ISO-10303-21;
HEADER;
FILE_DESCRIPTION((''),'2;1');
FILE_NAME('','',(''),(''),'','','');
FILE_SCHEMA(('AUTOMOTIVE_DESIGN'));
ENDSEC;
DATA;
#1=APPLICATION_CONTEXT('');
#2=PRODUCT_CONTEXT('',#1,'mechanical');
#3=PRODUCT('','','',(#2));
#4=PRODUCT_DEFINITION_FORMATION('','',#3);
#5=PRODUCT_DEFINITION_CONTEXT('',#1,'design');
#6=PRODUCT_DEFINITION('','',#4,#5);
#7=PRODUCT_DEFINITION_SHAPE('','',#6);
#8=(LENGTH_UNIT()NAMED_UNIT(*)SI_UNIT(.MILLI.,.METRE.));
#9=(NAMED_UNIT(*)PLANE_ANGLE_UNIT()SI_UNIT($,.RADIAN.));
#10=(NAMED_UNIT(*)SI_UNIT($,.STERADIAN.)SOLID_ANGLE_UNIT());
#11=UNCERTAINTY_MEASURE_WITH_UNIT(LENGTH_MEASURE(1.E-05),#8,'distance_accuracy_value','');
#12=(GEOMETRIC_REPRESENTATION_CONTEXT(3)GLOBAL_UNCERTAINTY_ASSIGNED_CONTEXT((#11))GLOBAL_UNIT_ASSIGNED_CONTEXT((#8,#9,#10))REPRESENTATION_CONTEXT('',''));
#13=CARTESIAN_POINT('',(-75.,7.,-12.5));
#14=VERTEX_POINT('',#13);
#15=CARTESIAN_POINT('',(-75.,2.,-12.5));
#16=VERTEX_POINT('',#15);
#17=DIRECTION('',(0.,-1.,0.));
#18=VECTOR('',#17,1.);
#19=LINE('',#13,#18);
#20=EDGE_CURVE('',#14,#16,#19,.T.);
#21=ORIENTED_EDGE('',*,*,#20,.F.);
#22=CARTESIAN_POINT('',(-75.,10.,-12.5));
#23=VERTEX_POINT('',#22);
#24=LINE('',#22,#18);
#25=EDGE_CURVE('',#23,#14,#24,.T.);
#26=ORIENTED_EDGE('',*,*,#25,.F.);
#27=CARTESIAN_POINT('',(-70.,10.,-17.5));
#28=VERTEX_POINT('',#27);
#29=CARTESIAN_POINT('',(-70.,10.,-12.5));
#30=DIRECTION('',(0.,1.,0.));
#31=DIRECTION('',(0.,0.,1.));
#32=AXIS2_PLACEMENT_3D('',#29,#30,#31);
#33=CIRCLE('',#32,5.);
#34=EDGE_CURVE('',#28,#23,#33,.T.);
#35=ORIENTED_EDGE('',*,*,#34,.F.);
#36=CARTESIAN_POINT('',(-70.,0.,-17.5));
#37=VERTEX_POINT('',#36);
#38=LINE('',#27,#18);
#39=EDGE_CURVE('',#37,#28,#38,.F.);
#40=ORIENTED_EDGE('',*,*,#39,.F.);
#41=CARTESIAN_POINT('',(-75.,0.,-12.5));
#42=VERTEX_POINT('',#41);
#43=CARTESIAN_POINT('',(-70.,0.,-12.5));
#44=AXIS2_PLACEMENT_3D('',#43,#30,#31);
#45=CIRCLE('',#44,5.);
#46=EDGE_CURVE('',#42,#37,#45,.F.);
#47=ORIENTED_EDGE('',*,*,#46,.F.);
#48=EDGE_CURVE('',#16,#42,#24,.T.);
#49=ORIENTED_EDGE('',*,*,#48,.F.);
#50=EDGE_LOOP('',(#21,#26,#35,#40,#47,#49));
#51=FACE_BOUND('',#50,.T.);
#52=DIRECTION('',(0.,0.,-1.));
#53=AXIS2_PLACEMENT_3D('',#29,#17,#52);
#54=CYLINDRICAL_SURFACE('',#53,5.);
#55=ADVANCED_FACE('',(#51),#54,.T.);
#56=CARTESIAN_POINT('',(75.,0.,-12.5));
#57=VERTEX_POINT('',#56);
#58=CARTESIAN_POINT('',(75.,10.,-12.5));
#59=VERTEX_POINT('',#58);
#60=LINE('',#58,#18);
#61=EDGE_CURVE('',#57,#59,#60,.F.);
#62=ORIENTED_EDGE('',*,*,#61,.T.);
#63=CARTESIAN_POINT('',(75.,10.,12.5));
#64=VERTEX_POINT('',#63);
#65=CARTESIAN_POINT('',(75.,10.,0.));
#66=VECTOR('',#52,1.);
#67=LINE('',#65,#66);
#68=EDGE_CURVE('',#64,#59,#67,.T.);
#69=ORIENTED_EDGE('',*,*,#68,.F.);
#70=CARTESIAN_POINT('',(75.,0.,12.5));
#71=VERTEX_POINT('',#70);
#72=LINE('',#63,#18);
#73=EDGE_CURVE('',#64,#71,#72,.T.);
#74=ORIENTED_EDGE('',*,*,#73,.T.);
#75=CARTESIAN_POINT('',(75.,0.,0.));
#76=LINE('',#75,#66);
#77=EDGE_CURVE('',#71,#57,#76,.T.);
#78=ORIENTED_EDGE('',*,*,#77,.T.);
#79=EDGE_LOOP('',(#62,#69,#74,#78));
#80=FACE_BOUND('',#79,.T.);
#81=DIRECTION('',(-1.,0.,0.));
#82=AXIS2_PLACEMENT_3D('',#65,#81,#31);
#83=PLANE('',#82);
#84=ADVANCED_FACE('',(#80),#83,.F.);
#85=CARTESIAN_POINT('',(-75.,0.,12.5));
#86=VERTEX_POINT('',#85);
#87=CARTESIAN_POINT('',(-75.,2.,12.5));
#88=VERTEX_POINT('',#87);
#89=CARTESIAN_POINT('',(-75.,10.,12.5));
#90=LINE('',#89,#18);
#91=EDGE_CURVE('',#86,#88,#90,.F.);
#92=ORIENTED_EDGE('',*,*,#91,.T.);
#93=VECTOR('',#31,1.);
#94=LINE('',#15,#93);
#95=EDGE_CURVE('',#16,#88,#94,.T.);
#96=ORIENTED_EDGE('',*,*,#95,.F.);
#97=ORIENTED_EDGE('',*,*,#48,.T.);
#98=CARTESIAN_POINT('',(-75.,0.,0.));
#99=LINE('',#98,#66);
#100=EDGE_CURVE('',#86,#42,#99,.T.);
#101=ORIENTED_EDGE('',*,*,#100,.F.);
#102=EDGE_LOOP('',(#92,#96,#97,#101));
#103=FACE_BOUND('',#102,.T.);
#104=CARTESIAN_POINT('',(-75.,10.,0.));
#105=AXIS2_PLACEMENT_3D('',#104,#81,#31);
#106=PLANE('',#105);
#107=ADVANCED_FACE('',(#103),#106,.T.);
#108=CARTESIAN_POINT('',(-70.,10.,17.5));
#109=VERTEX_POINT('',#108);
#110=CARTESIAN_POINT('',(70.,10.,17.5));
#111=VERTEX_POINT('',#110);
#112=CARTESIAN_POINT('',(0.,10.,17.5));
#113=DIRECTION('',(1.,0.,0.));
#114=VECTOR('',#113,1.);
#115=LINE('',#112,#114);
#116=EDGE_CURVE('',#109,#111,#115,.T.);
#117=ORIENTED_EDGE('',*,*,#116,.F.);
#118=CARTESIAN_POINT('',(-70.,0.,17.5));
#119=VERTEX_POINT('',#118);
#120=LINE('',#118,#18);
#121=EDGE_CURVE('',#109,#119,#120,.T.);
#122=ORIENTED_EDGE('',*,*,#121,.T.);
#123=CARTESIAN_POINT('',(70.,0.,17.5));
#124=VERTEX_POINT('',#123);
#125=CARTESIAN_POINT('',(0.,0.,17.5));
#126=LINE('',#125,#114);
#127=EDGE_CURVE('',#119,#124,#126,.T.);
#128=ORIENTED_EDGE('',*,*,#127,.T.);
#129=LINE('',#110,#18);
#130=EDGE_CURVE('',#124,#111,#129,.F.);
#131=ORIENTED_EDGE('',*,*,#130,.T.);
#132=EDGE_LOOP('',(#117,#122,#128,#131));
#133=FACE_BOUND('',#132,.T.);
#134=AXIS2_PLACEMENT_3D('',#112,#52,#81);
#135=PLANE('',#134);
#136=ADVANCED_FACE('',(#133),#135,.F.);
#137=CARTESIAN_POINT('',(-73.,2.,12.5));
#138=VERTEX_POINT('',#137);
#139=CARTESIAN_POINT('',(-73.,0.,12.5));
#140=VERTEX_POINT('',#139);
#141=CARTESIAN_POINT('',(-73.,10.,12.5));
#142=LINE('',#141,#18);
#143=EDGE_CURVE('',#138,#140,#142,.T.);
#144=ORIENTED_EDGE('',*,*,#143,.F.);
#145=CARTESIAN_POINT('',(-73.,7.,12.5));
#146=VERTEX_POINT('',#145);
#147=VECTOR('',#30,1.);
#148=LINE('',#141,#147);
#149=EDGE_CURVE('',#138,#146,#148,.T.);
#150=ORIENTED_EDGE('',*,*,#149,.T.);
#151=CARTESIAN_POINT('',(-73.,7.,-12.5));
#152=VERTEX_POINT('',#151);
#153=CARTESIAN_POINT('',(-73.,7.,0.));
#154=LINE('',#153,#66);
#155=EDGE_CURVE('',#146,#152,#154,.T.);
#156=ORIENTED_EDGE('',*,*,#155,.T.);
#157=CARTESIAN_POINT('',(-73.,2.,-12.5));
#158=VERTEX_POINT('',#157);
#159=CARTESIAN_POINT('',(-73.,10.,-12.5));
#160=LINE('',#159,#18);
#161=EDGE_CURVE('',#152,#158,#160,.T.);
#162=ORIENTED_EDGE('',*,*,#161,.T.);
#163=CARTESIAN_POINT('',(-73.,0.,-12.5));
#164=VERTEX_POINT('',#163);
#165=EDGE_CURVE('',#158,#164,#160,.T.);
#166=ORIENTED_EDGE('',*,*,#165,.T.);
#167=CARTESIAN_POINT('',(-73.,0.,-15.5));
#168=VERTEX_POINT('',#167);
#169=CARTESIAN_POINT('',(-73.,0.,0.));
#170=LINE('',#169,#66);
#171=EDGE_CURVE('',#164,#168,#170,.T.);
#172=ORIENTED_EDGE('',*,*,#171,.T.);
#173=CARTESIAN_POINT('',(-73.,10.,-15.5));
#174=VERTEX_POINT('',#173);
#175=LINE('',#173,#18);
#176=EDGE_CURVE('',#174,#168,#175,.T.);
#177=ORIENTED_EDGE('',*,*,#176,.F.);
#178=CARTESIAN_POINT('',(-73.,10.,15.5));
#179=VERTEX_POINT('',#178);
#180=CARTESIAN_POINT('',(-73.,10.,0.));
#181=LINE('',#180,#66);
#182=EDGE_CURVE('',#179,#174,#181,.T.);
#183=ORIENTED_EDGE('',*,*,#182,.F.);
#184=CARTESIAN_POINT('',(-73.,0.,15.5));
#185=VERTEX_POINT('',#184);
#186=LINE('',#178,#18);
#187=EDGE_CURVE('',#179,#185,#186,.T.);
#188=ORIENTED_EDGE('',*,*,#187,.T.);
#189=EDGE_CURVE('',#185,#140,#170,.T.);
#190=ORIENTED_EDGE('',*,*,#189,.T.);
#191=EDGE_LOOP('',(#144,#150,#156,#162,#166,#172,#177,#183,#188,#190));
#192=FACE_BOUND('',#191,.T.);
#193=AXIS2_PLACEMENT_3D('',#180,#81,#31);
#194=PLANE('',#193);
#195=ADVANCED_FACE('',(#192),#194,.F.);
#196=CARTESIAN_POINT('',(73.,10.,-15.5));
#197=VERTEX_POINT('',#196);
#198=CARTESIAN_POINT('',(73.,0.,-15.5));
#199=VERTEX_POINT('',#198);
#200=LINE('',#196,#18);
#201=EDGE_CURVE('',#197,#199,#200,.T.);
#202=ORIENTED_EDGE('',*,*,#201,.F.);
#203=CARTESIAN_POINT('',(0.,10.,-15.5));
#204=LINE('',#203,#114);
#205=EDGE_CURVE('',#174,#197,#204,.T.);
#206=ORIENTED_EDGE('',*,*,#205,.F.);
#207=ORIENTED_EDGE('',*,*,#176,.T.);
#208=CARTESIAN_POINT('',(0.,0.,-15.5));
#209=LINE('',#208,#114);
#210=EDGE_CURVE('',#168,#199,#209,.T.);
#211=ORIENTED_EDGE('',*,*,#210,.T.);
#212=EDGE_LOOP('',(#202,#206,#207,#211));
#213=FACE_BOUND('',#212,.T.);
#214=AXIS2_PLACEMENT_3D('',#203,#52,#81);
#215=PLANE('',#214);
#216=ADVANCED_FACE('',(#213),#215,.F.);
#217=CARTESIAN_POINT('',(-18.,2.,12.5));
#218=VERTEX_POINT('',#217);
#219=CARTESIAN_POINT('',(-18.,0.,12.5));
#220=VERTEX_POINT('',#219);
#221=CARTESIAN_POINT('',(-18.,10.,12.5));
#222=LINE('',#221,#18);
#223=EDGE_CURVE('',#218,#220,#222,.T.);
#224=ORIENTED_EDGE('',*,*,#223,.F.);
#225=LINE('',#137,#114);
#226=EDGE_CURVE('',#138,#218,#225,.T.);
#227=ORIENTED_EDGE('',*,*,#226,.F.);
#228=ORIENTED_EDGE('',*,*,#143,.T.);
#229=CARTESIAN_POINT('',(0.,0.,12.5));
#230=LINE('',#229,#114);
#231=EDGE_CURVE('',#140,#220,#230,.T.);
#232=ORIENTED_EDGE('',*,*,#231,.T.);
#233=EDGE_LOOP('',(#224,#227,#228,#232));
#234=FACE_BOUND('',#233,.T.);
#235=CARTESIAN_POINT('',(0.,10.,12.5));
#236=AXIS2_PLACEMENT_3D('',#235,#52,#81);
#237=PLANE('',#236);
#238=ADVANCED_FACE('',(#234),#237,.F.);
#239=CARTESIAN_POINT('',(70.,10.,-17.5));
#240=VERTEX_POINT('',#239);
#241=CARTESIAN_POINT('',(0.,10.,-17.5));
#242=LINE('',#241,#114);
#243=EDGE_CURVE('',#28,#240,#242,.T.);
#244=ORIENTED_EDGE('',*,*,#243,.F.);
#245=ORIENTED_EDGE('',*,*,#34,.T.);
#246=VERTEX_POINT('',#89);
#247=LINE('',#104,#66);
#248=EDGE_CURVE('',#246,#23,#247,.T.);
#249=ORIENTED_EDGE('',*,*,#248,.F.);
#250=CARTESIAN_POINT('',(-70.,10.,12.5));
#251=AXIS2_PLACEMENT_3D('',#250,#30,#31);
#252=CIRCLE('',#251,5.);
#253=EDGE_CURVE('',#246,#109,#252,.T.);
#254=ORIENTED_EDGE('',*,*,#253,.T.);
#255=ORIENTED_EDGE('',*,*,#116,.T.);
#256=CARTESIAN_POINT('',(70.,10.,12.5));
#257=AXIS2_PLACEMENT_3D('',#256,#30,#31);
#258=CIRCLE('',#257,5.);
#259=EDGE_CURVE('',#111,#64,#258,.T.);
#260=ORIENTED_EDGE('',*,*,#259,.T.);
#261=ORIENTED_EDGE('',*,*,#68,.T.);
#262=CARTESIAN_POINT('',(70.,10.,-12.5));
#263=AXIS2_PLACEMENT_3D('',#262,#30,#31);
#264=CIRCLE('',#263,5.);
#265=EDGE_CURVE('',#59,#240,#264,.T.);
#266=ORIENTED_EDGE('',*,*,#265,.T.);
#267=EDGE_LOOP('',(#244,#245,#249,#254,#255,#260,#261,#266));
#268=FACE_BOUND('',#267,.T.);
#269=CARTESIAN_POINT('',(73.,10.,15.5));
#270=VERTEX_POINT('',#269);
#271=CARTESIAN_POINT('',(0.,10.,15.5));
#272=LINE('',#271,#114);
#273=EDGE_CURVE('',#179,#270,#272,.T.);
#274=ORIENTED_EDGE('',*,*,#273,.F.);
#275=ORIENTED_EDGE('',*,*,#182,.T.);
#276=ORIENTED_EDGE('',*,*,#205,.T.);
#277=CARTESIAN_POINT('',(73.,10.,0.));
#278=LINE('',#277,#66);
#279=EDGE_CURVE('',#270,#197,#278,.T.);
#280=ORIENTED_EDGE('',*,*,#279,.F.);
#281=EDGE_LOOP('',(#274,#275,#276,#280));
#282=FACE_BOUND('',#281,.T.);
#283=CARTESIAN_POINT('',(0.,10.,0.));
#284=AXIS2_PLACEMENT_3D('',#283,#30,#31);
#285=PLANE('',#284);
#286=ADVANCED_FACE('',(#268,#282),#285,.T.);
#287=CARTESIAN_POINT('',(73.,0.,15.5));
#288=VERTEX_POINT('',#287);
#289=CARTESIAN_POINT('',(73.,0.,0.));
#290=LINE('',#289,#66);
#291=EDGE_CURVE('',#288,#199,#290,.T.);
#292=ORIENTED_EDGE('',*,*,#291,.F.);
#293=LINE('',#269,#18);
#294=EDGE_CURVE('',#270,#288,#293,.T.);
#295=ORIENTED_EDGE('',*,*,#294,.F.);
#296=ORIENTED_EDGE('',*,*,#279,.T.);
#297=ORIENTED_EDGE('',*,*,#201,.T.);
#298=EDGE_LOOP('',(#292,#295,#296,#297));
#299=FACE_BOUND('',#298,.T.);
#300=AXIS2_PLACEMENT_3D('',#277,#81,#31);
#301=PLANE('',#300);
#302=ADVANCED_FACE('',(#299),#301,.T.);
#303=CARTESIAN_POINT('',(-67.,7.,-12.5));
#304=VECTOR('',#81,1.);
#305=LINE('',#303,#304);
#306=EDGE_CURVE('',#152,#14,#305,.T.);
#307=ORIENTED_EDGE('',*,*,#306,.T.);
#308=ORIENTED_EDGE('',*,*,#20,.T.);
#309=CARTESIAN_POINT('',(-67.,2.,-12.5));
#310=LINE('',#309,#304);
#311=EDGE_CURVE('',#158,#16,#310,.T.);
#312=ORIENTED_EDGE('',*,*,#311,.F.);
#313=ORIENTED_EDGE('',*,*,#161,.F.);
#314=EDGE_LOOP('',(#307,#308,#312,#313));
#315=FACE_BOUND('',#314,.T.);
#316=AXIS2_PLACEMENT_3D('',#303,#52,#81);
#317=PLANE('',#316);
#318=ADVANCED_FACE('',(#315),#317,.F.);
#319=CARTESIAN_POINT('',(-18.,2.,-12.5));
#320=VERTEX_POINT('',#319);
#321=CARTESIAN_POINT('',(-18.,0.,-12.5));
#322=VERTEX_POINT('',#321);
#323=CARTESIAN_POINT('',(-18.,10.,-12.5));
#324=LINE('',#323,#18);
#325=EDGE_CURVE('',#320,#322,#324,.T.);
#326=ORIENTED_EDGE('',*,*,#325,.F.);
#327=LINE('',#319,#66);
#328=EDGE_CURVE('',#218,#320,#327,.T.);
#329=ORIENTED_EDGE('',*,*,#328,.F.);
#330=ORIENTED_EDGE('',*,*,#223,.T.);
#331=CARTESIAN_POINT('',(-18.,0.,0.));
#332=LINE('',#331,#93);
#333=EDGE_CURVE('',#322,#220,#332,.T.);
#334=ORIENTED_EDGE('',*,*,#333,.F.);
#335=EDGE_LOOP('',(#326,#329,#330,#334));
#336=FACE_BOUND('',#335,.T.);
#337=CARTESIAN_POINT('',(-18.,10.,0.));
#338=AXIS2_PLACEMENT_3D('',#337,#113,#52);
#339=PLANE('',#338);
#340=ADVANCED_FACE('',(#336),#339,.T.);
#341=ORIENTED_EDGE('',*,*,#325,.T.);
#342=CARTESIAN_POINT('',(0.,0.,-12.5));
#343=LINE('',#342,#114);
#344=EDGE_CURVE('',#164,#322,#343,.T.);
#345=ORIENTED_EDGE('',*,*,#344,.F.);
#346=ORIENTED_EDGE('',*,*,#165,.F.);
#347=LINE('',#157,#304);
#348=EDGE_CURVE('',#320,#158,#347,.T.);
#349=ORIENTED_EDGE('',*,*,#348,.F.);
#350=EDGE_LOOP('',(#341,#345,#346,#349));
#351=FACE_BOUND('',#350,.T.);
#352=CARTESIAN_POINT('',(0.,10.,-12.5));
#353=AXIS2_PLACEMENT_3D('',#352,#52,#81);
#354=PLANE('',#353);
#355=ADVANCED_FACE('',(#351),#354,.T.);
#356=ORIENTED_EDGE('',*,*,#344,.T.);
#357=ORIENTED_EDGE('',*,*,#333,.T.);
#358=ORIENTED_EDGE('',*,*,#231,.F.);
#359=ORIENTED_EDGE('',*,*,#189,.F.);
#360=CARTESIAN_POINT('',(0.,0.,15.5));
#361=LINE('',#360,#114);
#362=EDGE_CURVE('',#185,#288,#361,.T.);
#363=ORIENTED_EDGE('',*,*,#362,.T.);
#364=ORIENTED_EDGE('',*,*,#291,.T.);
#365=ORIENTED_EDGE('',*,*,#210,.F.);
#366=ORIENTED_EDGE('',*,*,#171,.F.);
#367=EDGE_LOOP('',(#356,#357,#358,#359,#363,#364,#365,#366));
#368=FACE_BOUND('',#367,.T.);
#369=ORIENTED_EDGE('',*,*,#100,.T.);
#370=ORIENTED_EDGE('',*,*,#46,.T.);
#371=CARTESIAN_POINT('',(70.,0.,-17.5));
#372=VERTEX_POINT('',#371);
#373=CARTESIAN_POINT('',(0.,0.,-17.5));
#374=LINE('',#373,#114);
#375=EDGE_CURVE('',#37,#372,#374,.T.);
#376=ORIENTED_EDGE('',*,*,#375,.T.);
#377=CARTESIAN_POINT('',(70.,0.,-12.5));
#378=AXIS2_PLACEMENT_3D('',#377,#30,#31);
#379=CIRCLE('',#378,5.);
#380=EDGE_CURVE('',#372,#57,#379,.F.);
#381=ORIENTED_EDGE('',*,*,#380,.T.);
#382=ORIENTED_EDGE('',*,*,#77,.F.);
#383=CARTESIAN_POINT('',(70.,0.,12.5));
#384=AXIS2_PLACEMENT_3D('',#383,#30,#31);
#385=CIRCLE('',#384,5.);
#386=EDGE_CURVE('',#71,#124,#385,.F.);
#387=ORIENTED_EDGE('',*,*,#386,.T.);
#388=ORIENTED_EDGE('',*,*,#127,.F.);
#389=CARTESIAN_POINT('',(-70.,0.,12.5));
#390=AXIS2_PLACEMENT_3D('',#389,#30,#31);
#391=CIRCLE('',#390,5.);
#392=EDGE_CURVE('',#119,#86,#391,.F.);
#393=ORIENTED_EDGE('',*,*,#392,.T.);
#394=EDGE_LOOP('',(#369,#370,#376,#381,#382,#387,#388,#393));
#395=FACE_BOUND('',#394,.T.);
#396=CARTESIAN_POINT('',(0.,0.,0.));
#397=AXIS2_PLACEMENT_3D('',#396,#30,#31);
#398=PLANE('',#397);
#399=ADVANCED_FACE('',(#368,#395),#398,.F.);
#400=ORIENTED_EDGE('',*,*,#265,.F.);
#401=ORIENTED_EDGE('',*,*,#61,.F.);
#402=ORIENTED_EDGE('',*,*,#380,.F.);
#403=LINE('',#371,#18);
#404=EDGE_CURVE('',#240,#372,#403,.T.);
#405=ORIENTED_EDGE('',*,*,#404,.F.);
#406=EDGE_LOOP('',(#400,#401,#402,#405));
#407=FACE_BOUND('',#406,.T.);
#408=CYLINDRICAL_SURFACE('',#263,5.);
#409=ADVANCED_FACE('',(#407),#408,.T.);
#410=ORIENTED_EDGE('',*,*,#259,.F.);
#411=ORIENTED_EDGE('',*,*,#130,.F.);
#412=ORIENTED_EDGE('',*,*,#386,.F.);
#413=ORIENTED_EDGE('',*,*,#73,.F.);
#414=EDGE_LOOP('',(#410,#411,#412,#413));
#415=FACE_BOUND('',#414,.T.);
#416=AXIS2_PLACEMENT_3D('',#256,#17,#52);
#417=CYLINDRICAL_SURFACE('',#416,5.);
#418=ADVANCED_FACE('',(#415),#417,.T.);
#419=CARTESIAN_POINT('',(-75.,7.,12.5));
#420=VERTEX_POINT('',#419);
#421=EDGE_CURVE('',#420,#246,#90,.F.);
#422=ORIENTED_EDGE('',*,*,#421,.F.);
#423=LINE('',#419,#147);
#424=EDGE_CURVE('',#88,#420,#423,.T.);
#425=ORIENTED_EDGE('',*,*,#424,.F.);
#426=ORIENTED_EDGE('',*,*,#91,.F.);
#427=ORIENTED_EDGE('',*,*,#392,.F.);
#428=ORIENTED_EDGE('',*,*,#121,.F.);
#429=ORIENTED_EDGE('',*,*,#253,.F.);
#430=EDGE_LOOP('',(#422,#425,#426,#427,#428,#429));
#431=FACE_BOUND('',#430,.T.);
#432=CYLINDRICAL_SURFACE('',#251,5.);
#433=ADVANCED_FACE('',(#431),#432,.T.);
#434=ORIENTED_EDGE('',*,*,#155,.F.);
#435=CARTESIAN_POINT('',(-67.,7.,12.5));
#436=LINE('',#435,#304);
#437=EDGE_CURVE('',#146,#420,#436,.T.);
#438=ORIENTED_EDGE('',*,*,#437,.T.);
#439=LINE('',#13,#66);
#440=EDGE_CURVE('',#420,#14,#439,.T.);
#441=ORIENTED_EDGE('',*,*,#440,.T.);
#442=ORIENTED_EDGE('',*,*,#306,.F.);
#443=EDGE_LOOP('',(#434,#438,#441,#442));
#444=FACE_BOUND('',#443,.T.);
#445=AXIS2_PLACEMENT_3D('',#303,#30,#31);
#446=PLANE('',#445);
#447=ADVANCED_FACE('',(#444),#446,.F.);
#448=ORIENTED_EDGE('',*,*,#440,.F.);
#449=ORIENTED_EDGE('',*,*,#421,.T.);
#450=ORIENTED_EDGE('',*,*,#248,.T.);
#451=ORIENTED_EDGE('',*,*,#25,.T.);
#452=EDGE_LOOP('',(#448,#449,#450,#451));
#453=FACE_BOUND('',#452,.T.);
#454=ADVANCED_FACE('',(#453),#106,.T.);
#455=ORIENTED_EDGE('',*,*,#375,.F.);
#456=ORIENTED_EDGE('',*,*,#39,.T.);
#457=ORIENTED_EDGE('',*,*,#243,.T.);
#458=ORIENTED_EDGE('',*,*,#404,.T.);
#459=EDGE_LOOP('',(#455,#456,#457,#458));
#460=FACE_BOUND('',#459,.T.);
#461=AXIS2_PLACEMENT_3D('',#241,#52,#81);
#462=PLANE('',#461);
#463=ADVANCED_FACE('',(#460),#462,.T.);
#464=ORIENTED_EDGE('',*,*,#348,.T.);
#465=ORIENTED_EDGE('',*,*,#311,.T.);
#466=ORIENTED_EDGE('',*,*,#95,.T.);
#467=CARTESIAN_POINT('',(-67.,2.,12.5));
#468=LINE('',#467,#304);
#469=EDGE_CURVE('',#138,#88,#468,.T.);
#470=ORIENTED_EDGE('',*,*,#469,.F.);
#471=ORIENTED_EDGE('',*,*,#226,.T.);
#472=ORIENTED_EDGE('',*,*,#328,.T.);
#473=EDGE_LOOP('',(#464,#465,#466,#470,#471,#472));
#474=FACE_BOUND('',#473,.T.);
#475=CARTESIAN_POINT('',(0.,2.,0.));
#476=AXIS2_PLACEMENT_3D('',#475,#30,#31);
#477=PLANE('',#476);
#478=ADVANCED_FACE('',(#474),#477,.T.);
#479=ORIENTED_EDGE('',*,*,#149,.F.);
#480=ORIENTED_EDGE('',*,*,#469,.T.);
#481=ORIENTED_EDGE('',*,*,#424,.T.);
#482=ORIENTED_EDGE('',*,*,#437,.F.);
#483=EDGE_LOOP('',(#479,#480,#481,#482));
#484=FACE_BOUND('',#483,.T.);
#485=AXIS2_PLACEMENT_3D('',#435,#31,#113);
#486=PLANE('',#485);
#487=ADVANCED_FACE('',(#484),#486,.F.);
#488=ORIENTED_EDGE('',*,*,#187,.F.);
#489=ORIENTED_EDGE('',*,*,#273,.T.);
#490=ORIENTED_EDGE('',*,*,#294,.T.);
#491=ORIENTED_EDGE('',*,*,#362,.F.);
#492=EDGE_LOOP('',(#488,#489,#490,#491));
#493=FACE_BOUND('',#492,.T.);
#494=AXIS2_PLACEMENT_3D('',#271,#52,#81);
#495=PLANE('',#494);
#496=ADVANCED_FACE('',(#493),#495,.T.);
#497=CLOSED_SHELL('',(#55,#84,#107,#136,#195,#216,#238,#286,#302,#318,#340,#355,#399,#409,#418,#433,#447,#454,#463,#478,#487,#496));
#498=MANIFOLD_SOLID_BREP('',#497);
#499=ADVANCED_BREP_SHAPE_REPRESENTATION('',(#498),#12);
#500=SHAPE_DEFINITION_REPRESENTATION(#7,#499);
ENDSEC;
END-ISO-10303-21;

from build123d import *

# Parameters (mm, degrees)
SKETCH1_W           = 150
SKETCH1_H           = 35
SKETCH1_W_2         = 146
SKETCH1_H_2         = 31
SKETCH1_W_3         = 55
SKETCH1_H_3         = 25
BOSS_EXTRUDE1_DEPTH = 10
SKETCH2_W           = 55
SKETCH2_H           = 25
CUT_EXTRUDE3_DEPTH  = 8
SKETCH6_W           = 25
SKETCH6_H           = 5
CUT_EXTRUDE4_DEPTH  = 8
FILLET1_R           = 5


with BuildPart() as part:
    # Sketch1 → Boss-Extrude1 (new body)
    # profile 1 of 2: a face of its own
    with BuildSketch(Plane(origin=(0, 0, 0), x_dir=(1, 0, 0), z_dir=(0, 1, 0))):
        Rectangle(SKETCH1_W, SKETCH1_H)
        Rectangle(SKETCH1_W_2, SKETCH1_H_2, mode=Mode.SUBTRACT)
    # profile 2 of 2: a face of its own
    with BuildSketch(Plane(origin=(0, 0, 0), x_dir=(1, 0, 0), z_dir=(0, 1, 0))):
        with Locations((-45.5, 0)):
            Rectangle(SKETCH1_W_3, SKETCH1_H_3)
    extrude(amount=BOSS_EXTRUDE1_DEPTH)

    # Sketch2 → Cut-Extrude3 (cut)
    with BuildSketch(Plane(origin=(0, 10, 0), x_dir=(1, 0, 0), z_dir=(0, 1, 0))):
        with Locations((-45.5, 0)):
            Rectangle(SKETCH2_W, SKETCH2_H)
    extrude(amount=-CUT_EXTRUDE3_DEPTH, mode=Mode.SUBTRACT)

    # Sketch6 → Cut-Extrude4 (cut)
    with BuildSketch(Plane.ZY.offset(75)):
        with Locations((0, 4.5)):
            Rectangle(SKETCH6_W, SKETCH6_H)
    extrude(amount=-CUT_EXTRUDE4_DEPTH, mode=Mode.SUBTRACT)

    # Fillet1
    fillet1_edges = [part.edges().sort_by_distance(p)[0] for p in [
        (-75, 5, 17.5),
        (-75, 5, -17.5),
        (75, 5, -17.5),
        (75, 5, 17.5),
    ]]
    fillet(fillet1_edges, radius=FILLET1_R - 0.0001)  # a hair under: the kernel refuses the full size


solid = part.part
